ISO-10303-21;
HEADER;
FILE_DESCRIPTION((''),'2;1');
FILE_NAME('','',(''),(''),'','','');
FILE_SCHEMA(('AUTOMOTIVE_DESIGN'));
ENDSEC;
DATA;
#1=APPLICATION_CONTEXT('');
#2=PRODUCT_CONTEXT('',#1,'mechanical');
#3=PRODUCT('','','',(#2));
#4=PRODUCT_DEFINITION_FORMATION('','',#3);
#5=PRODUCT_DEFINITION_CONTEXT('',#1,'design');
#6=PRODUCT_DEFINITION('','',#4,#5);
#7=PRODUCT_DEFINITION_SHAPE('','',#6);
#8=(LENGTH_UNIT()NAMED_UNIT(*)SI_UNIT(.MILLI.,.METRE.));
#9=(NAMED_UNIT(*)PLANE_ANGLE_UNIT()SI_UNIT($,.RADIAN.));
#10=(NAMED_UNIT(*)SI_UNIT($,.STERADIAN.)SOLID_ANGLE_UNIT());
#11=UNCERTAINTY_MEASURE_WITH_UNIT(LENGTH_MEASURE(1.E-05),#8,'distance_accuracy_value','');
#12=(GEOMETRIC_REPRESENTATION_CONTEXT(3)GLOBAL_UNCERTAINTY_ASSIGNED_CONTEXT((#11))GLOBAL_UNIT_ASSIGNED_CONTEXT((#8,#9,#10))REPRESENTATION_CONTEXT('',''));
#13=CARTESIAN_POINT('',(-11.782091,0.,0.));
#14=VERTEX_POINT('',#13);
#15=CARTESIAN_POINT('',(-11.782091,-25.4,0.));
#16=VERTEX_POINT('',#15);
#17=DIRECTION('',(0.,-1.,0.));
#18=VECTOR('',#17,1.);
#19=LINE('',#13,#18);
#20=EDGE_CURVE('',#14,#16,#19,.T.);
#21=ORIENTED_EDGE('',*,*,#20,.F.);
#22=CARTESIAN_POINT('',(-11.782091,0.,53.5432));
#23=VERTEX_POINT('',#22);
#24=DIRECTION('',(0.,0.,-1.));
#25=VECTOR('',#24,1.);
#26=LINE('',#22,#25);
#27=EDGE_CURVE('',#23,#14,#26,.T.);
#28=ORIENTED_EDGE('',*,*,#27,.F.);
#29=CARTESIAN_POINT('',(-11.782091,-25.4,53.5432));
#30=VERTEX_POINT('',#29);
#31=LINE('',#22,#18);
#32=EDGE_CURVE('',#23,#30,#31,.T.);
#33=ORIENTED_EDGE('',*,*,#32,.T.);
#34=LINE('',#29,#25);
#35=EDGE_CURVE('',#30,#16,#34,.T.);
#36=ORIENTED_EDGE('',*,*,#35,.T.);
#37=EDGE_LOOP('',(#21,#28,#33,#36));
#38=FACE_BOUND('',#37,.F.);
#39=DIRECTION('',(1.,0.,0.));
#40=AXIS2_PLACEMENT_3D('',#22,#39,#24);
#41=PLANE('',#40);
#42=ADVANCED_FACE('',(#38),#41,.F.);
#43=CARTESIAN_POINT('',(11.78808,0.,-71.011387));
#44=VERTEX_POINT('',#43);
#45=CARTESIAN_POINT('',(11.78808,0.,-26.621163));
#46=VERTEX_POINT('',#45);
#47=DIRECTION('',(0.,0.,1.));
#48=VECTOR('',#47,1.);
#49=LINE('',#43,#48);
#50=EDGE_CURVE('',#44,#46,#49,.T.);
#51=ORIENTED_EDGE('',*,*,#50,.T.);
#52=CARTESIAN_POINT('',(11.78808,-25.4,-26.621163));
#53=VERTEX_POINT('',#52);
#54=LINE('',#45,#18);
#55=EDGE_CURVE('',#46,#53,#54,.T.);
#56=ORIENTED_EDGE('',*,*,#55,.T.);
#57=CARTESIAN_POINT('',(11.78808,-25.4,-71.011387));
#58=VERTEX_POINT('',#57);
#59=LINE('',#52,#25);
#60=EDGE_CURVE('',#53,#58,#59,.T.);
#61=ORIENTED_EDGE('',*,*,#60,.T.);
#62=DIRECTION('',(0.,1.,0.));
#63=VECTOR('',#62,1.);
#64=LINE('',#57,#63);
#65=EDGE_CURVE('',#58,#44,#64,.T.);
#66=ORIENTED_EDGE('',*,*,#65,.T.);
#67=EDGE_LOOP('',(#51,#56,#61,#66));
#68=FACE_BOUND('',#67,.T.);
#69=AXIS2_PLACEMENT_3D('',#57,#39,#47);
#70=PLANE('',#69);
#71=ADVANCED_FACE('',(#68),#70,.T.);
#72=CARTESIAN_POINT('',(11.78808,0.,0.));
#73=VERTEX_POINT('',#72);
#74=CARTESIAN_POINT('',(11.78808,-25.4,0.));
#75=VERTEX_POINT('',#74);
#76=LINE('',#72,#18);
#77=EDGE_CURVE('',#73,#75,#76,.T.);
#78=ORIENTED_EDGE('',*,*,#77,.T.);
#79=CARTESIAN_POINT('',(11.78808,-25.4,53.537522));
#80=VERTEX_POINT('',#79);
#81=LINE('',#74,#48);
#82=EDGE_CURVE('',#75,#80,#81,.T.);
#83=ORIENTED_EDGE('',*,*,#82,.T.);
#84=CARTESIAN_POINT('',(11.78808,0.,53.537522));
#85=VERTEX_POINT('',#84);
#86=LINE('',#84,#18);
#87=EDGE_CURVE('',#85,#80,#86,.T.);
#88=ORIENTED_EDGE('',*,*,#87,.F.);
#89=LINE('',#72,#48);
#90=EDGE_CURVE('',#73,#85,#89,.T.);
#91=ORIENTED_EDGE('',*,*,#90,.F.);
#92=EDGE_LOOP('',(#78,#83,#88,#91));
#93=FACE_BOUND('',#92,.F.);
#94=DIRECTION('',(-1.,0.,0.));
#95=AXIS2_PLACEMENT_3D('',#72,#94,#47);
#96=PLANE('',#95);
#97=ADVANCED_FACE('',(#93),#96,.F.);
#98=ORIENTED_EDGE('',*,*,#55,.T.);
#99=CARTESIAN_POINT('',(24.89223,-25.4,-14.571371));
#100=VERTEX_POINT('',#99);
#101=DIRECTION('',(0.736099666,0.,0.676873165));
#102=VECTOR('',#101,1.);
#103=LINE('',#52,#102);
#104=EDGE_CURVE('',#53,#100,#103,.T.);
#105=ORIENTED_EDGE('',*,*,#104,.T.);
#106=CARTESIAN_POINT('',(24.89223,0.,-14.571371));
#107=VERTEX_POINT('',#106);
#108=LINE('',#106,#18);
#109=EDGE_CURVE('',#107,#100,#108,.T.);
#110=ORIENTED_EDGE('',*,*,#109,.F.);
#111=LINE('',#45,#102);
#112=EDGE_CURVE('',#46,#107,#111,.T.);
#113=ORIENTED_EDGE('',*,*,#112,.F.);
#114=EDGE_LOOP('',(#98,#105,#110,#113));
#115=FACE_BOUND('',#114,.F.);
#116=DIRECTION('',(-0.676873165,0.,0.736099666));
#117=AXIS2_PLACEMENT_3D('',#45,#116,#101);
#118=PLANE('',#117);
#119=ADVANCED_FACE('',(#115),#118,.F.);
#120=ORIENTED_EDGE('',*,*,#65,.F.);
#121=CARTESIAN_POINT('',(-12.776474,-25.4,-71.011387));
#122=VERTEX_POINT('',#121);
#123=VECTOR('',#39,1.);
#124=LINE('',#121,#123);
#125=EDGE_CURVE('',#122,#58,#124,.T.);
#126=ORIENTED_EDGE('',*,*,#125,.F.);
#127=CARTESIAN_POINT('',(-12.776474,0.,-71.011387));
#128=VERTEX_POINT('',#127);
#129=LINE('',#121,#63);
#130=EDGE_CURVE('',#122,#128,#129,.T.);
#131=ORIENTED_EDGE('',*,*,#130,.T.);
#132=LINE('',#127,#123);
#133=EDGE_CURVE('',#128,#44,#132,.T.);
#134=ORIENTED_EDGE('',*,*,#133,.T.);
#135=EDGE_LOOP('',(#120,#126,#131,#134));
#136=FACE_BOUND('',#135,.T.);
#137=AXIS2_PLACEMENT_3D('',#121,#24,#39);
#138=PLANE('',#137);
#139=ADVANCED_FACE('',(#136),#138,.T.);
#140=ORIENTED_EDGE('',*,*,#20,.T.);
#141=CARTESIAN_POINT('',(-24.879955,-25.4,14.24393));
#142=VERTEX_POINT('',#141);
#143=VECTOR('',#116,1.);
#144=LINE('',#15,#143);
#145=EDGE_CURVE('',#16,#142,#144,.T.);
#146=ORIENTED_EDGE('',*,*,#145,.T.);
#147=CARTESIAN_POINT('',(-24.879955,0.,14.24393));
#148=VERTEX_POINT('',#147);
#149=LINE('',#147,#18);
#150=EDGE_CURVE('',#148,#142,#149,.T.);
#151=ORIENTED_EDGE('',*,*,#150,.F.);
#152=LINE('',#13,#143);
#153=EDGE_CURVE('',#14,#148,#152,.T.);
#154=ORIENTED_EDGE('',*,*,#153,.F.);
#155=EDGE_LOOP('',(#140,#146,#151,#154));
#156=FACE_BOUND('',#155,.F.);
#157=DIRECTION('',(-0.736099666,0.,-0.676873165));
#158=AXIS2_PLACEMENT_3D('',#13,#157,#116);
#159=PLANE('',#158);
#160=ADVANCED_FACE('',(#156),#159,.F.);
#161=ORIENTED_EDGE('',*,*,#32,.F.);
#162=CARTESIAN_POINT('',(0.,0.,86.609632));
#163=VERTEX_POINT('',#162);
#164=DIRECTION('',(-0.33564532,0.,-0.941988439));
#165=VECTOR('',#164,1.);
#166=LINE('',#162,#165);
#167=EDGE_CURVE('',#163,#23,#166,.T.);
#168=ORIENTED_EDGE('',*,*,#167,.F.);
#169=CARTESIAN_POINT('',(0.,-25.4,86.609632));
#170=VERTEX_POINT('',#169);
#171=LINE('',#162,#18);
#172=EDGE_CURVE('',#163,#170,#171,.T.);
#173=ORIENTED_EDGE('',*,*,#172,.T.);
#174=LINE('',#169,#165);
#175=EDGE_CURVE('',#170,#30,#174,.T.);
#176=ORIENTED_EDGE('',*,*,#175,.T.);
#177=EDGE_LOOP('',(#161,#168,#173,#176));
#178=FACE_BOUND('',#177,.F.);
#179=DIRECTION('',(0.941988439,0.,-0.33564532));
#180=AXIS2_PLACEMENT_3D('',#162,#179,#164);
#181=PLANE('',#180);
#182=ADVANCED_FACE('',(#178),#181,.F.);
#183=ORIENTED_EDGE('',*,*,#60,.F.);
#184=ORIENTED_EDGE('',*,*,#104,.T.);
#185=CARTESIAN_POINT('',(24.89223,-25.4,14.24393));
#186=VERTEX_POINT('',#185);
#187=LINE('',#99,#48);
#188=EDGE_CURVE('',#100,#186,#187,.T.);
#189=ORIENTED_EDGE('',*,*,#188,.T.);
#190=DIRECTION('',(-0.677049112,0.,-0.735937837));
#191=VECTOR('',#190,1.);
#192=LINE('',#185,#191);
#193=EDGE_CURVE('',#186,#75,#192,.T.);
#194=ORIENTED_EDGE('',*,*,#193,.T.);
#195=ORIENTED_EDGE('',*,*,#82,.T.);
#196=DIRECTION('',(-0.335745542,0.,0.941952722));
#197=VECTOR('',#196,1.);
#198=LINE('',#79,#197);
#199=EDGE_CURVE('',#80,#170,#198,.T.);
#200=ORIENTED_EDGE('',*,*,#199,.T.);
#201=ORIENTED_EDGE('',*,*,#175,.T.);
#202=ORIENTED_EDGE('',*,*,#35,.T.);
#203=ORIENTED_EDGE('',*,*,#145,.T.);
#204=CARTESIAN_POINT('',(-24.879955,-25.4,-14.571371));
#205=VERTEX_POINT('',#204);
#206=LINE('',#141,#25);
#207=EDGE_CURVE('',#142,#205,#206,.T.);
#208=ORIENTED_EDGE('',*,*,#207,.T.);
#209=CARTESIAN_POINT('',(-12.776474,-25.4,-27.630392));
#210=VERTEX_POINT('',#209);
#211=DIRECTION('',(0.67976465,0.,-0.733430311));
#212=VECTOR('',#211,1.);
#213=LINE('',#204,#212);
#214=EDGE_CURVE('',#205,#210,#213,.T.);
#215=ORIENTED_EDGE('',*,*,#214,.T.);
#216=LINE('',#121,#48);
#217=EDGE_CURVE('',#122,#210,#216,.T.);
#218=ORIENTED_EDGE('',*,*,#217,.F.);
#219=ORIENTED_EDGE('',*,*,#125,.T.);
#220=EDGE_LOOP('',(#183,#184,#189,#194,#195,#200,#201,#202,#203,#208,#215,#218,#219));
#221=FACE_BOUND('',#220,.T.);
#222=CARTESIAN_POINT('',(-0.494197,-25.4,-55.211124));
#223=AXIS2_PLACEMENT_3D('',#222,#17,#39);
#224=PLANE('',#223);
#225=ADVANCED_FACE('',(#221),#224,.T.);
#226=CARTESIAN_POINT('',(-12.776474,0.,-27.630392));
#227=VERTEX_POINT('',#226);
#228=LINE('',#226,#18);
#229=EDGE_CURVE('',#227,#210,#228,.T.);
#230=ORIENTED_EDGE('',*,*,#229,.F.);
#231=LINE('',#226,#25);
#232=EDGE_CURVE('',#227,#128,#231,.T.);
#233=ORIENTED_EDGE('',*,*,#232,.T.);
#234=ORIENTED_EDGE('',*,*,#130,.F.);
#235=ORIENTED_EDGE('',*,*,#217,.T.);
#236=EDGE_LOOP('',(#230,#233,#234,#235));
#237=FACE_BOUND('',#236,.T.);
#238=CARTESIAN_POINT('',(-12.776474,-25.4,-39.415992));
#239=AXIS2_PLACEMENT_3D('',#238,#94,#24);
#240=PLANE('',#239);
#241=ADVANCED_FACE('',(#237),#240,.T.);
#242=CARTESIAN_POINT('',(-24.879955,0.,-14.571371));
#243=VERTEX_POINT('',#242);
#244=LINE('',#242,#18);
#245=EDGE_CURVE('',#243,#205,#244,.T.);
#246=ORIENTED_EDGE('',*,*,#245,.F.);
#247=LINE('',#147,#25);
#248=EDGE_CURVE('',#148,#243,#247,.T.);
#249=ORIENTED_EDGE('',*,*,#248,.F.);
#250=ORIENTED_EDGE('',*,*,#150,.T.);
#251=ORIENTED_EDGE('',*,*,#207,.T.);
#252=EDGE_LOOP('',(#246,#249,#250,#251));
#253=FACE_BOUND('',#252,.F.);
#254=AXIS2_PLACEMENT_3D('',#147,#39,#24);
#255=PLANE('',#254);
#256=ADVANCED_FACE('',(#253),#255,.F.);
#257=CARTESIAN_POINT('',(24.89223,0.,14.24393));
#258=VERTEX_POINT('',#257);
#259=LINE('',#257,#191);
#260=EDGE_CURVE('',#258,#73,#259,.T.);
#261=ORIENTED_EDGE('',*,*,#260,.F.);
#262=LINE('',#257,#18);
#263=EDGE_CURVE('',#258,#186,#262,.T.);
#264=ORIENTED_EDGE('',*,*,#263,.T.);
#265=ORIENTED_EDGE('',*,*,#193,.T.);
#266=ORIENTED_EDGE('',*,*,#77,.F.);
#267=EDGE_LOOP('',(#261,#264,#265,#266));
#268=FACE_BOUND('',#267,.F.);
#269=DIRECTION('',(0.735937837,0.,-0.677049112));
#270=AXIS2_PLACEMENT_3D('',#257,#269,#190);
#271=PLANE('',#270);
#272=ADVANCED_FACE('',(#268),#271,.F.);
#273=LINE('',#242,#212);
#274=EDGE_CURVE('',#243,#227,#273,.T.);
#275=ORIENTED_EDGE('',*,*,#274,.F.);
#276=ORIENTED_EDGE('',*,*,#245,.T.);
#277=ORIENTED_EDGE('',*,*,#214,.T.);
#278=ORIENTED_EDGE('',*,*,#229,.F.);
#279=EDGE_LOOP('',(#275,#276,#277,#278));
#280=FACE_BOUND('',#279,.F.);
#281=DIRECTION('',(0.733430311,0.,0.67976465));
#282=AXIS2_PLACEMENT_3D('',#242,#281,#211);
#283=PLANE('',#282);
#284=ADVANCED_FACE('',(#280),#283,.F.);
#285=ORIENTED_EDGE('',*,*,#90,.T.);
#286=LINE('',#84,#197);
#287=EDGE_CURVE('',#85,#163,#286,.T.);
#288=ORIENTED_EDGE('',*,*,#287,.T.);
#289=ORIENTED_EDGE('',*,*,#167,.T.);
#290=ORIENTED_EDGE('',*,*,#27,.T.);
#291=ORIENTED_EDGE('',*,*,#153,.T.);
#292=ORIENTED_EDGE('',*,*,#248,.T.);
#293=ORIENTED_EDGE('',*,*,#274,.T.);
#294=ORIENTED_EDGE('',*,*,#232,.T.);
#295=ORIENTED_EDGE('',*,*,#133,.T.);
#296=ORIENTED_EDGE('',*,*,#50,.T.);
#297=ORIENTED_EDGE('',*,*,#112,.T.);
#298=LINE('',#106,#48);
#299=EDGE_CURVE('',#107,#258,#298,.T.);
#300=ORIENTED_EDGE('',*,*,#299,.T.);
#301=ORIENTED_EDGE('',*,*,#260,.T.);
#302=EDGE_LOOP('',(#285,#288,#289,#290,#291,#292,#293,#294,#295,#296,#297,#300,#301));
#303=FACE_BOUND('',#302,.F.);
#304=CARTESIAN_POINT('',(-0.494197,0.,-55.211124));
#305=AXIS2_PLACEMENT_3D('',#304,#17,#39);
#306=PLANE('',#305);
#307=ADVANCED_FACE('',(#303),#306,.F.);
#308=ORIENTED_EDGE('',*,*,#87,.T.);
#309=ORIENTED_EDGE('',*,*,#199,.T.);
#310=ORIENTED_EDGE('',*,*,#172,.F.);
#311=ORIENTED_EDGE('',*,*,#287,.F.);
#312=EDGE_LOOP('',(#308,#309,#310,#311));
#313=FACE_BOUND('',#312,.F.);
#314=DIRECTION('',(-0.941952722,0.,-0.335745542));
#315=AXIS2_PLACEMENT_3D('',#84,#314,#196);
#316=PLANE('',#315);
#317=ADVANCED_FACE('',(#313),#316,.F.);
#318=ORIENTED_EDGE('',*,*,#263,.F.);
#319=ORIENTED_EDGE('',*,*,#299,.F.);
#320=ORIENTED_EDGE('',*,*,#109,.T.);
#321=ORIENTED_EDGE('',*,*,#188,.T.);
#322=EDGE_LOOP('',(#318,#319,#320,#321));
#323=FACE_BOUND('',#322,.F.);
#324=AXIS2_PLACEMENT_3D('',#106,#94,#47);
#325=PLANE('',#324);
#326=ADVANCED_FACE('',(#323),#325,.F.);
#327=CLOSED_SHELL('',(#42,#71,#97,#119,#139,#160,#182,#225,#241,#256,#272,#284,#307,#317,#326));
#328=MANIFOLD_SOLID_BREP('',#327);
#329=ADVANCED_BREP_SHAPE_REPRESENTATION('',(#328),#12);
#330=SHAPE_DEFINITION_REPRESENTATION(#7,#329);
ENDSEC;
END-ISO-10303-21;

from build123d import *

# Parameters (mm, degrees)
F1_DEPTH = 25.4
F3_DEPTH = 25.4


# Not quite as in the source:
# - a feature names something its author has since deleted; it is built from what else it names


with BuildPart() as f1:
    # F0 (on Front) → F1 (new body)
    with BuildSketch(Plane.XZ):
        Polygon((11.7880795151, 53.5375215113), (0, 86.6096317768), (-11.7820905356, 53.5432), (-11.7820905356, 0), (-24.8799551113, 14.2439296469), (-24.8799551113, -14.5713714883), (-12.7764736156, -27.6303915451), (-12.7764736156, -39.4159915451), (11.7880795151, -39.4159915451), (11.7880795151, -26.6211631082), (24.8922296689, -14.5713714883), (24.8922296689, 14.2439296469), (11.7880795151, 0), align=None)
    extrude(amount=F1_DEPTH)

    # F2 (on face) → F3 (join)
    with BuildSketch(Plane.XZ.offset(25.4)):
        Polygon((-0.4971447281, -47.3129446821), (-12.7764736156, -55.2061082793), (-0.4912507866, -63.1106432249), (11.7880795151, -55.2136891784), align=None)
        Polygon((11.7880795151, -39.4159915451), (-12.7764736156, -39.4159915451), (-0.4971447281, -47.3129446821), align=None)
        Polygon((-0.4912507866, -63.1106432249), (-12.7764736156, -71.0113868117), (11.7880795151, -71.0113868117), align=None)
        Polygon((11.7880795151, -39.4159915451), (-0.4971447281, -47.3129446821), (11.7880795151, -55.2136891784), align=None)
        Polygon((-0.4971447281, -47.3129446821), (-12.7764736156, -39.4159915451), (-12.7764736156, -55.2061082793), align=None)
        Polygon((11.7880795151, -55.2136891784), (-0.4912507866, -63.1106432249), (11.7880795151, -71.0113868117), align=None)
        Polygon((-0.4912507866, -63.1106432249), (-12.7764736156, -55.2061082793), (-12.7764736156, -71.0113868117), align=None)
    extrude(amount=-F3_DEPTH)


solid = f1.part
